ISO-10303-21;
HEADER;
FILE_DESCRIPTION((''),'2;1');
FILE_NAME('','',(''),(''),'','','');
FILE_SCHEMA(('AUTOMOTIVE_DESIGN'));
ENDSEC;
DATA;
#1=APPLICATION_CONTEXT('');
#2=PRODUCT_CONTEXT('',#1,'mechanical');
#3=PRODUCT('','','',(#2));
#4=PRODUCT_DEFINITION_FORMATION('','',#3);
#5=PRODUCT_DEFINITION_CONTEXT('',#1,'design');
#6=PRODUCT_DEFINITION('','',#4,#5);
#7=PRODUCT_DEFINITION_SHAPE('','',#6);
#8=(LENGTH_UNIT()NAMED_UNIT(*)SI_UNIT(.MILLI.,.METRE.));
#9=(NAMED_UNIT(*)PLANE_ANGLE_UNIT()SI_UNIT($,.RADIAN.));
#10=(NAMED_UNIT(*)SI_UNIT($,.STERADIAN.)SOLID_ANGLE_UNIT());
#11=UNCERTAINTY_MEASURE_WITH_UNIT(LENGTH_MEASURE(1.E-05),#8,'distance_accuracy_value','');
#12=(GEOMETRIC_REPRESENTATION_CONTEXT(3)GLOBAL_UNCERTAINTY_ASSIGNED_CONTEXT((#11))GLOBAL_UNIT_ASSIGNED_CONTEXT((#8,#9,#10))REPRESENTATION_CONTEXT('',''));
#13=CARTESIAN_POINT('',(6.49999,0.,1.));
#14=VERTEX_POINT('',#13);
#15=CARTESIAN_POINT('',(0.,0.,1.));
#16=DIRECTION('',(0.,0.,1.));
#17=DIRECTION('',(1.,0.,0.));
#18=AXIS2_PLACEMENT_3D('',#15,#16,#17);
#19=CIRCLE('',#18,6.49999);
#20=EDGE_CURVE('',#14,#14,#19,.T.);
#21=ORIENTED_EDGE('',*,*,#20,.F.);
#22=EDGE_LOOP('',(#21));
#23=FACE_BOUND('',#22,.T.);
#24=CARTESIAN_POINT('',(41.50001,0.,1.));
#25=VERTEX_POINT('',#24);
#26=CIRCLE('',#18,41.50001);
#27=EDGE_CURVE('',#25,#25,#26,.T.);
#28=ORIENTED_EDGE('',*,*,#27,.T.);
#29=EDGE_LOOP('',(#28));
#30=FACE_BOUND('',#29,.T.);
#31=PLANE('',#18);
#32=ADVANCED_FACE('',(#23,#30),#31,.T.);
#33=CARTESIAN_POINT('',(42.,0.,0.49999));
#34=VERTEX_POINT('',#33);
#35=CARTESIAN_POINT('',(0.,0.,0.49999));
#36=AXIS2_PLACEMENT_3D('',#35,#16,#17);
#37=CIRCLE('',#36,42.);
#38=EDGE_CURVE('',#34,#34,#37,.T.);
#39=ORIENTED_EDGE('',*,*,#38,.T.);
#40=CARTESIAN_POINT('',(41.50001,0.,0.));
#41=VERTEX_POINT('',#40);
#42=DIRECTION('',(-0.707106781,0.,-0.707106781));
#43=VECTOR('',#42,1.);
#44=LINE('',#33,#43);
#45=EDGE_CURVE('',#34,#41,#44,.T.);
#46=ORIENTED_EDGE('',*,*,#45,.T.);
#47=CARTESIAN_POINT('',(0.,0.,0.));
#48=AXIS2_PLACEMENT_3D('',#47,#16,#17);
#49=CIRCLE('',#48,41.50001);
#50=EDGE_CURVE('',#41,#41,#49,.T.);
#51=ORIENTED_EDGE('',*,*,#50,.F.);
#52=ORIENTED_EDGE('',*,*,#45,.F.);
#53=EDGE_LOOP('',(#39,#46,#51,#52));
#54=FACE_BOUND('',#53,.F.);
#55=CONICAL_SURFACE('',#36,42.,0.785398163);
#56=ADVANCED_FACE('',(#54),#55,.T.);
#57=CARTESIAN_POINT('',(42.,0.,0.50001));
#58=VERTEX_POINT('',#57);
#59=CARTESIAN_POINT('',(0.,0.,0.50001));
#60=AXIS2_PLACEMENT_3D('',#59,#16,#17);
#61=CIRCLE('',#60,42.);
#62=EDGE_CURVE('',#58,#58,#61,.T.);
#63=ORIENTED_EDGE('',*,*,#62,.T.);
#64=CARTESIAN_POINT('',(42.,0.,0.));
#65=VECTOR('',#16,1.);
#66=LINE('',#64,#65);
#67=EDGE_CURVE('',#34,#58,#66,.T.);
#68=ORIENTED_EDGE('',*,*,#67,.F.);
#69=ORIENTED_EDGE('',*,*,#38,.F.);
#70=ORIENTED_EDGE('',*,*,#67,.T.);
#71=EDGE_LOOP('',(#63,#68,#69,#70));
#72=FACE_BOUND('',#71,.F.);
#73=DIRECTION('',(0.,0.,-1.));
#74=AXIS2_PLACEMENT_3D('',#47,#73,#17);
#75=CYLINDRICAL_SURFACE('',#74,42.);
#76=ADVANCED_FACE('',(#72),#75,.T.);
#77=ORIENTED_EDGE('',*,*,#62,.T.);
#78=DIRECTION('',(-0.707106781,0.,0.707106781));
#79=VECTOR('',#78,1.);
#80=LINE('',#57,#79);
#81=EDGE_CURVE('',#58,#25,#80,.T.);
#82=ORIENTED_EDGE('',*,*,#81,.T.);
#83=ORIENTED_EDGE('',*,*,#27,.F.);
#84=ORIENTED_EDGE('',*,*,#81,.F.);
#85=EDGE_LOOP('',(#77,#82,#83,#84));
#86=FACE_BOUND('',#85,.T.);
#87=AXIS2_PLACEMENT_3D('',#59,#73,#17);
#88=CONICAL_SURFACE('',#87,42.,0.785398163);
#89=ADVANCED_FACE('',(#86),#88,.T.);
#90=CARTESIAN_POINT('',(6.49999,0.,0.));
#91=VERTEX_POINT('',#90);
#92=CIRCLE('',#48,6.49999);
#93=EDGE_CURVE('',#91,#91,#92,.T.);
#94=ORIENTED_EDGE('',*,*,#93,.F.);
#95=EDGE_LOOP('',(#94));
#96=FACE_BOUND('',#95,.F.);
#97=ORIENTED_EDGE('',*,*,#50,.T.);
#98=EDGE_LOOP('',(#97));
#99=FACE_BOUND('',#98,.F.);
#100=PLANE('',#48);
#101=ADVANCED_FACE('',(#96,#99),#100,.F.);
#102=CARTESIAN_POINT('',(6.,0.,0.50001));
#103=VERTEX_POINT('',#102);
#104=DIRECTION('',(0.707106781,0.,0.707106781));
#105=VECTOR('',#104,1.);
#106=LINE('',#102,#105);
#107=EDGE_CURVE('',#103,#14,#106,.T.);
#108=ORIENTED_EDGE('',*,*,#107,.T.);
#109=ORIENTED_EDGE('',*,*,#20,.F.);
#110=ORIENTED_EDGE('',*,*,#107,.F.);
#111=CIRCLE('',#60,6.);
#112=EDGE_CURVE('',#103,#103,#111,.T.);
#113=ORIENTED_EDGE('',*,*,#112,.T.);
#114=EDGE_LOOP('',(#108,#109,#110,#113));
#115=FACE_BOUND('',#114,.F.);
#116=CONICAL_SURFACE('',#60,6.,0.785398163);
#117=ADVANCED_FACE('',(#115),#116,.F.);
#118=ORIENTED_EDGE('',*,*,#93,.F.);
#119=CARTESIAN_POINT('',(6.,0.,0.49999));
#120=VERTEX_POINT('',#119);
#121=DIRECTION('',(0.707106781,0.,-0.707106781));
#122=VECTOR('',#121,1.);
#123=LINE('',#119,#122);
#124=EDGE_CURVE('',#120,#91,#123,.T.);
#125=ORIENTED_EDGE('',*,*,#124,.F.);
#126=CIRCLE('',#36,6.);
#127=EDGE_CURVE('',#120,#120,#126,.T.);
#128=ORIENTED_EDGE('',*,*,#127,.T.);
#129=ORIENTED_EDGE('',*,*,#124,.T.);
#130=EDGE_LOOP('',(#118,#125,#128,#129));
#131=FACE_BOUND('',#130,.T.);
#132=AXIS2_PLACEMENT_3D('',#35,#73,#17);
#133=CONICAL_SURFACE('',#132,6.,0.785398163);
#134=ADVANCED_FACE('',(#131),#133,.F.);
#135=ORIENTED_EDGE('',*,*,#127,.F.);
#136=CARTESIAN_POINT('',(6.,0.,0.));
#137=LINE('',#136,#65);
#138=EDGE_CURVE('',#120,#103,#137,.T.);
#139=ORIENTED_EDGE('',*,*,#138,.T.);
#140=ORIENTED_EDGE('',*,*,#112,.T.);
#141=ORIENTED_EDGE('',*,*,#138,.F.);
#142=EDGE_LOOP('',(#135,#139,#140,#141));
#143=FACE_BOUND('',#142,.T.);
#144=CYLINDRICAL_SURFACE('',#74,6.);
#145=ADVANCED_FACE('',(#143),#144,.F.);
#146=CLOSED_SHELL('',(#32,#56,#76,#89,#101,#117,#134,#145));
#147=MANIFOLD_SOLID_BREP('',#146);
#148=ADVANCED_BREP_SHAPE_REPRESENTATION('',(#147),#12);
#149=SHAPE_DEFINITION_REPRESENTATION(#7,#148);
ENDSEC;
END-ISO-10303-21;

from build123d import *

# Parameters (mm, degrees)
F0_R     = 42
F0_R_2   = 6
F1_DEPTH = 1
F2_SIZE  = 0.49999


# Not quite as in the source:
# - a fillet or chamfer is up to 0.001 mm smaller than in the source, because OpenCascade refuses the exact size


with BuildPart() as f1:
    # F0 (on Top) → F1 (new body)
    with BuildSketch(Plane.XY):
        Circle(F0_R)
        Circle(F0_R_2, mode=Mode.SUBTRACT)
    extrude(amount=F1_DEPTH)

    # F2 (size 0.5 in the source; OpenCascade refuses exactly that, so slightly less here)
    f2_edges = [f1.edges().sort_by_distance(p)[0] for p in [
        (-6, 0, 1),
        (-42, 0, 1),
        (-42, 0, 0),
        (-6, 0, 0),
    ]]
    chamfer(f2_edges, length=F2_SIZE)


solid = f1.part
